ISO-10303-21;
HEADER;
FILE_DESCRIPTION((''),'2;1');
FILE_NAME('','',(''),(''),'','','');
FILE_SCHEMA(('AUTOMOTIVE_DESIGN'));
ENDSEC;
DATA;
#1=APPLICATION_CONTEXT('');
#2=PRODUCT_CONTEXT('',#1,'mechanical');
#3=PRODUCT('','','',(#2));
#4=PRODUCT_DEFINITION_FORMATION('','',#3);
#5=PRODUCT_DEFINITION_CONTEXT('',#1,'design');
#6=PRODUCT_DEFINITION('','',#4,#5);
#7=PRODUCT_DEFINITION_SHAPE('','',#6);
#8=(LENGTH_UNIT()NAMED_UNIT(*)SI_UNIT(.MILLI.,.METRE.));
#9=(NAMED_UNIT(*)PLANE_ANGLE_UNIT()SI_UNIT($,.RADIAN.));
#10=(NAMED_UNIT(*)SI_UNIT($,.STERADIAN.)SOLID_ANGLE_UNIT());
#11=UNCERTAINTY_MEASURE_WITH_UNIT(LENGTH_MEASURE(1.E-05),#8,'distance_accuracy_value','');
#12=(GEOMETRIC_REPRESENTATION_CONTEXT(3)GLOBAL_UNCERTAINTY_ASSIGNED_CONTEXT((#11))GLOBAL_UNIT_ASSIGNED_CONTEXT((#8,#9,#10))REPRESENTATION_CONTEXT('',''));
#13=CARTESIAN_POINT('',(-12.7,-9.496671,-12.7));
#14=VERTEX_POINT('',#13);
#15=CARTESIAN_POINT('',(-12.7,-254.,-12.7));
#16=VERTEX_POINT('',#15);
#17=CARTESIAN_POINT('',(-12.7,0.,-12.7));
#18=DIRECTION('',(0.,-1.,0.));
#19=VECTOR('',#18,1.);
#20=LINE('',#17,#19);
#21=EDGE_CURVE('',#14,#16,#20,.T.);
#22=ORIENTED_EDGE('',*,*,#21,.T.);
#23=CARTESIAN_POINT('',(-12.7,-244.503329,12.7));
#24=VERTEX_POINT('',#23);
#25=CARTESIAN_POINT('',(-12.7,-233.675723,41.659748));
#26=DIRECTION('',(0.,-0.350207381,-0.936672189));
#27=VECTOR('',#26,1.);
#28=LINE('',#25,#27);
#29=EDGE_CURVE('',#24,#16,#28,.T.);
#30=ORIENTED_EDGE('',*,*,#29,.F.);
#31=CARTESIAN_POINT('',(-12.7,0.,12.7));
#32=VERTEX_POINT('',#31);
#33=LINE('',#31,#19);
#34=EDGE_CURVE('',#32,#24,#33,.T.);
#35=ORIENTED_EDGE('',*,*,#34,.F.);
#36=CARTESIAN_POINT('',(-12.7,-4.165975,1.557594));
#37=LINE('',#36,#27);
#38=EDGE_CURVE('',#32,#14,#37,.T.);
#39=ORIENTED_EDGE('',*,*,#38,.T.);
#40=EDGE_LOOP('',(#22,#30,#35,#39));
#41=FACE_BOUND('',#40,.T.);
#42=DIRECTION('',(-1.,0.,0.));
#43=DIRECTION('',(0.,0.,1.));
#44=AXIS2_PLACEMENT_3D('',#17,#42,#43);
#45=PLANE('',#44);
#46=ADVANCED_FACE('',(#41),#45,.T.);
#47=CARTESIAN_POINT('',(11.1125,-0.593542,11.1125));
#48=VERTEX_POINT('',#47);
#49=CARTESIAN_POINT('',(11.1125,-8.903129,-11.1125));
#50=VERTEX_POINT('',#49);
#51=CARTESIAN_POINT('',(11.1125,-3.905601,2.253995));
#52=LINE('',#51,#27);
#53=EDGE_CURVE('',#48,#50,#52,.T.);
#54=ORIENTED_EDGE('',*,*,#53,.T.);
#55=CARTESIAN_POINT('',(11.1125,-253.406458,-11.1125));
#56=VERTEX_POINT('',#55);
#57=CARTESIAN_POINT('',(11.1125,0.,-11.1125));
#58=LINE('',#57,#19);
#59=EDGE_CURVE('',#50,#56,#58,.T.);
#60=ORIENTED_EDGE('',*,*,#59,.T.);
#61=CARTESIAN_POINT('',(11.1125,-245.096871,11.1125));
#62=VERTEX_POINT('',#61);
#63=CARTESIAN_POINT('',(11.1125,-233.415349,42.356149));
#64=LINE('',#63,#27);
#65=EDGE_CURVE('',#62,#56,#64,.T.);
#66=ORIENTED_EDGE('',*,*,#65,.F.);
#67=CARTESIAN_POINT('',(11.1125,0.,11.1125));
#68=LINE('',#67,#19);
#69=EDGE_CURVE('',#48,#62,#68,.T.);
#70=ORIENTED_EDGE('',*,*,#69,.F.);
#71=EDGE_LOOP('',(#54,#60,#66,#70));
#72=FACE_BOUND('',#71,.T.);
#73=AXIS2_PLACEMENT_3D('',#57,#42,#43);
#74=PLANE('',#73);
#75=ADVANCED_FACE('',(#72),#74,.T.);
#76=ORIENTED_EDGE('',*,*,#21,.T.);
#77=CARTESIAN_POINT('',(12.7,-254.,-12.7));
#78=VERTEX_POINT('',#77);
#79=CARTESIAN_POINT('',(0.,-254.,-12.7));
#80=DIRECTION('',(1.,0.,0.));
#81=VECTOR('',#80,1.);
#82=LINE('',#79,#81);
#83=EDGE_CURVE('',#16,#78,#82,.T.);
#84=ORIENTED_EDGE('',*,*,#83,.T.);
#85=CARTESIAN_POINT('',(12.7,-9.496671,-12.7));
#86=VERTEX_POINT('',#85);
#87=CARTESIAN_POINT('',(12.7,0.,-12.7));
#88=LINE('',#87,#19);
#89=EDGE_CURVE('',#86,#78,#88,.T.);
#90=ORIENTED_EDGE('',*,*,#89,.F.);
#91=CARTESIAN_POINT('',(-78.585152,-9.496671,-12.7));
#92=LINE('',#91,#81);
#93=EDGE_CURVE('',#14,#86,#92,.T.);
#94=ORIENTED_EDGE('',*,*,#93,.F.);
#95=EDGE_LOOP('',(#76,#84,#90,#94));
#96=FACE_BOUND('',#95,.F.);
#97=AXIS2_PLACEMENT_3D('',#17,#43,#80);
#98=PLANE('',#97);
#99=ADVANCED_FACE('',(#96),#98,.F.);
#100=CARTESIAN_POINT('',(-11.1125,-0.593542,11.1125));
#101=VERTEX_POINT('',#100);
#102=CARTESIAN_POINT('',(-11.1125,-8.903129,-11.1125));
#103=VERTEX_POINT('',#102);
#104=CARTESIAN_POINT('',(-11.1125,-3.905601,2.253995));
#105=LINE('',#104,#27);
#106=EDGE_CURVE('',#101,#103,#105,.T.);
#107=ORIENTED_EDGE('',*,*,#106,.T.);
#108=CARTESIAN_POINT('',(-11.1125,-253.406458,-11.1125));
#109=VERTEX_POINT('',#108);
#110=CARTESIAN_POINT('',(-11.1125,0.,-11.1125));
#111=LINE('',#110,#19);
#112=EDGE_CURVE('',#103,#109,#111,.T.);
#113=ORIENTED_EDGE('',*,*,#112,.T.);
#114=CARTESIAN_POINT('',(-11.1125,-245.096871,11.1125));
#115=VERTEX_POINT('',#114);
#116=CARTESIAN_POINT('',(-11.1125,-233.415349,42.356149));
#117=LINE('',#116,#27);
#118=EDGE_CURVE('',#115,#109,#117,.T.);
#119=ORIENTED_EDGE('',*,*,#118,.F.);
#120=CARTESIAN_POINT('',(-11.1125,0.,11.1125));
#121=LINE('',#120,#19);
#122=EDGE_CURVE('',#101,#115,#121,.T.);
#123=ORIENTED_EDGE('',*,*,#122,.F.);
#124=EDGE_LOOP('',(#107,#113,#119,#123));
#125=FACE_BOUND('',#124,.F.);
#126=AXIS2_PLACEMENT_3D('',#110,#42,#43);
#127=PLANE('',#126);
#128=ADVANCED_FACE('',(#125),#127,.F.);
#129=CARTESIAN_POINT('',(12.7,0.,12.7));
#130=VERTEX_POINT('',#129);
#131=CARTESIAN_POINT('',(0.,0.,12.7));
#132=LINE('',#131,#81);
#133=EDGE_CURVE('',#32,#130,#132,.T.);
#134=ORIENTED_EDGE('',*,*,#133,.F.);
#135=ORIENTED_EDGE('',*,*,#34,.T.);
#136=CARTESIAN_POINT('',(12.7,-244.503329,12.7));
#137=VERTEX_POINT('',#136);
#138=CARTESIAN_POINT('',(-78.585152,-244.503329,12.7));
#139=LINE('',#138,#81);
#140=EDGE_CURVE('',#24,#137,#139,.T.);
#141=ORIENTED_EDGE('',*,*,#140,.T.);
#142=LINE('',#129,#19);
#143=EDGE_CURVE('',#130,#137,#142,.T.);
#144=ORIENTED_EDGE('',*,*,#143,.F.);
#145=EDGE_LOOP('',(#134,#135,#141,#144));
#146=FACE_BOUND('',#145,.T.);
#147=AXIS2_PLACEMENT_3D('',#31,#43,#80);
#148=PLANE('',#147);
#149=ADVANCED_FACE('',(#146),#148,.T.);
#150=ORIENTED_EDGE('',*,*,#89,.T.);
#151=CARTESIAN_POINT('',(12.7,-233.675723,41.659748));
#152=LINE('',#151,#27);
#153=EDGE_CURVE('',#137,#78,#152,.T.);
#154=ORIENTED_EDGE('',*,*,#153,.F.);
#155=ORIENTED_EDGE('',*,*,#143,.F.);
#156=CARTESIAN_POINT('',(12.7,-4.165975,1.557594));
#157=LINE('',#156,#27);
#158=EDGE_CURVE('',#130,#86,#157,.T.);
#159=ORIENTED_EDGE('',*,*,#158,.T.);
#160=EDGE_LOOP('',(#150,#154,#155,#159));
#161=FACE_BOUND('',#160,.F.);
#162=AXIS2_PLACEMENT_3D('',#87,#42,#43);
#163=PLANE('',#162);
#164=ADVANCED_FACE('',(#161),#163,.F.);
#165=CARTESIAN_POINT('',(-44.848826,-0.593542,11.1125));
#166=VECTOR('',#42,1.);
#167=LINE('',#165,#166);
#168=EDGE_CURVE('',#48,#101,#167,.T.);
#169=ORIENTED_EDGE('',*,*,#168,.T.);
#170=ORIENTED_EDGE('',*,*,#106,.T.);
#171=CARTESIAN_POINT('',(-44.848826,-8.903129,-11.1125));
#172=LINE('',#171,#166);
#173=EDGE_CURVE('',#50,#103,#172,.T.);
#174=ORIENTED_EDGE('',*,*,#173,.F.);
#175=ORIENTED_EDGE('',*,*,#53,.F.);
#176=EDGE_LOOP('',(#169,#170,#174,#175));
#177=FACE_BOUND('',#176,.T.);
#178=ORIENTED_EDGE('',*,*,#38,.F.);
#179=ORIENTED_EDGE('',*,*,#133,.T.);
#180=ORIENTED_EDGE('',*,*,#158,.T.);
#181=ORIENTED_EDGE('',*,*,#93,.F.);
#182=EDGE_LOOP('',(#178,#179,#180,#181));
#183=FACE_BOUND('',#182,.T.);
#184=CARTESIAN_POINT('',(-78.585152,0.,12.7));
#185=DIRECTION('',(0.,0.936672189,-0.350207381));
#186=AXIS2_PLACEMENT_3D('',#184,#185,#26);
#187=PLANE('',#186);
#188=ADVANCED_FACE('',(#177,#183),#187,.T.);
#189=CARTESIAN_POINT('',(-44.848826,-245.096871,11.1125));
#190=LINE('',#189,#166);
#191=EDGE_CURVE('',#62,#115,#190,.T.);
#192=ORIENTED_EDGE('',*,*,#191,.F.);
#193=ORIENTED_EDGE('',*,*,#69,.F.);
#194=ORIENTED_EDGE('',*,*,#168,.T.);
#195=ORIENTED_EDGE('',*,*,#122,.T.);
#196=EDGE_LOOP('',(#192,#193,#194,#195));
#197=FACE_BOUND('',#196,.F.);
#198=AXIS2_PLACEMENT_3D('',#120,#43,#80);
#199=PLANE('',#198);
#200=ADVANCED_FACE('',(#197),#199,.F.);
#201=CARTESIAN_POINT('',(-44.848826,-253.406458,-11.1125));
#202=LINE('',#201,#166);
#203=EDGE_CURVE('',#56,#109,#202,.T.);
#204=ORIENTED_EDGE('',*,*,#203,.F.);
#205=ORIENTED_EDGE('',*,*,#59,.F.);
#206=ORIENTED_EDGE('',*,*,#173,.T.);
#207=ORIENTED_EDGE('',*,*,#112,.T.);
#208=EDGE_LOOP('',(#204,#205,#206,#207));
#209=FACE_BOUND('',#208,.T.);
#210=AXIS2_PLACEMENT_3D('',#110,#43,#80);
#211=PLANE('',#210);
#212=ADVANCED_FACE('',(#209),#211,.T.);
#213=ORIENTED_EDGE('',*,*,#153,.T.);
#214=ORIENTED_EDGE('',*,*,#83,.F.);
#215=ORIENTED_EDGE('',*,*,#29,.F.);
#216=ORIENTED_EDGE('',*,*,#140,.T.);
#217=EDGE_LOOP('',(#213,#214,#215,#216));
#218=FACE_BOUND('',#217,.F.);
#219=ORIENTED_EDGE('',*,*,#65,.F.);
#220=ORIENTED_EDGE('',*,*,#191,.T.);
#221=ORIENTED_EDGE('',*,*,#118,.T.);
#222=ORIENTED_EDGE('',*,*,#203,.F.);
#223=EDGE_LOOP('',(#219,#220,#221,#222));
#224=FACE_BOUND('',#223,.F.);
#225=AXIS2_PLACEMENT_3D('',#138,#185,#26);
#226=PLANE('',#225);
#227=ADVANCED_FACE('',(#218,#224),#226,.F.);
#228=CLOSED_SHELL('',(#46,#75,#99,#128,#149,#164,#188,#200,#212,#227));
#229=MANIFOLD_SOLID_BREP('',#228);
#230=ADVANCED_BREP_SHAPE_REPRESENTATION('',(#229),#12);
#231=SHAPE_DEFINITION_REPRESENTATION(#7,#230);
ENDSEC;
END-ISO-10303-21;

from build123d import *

# Parameters (mm, degrees)
F0_W        = 25.4
F0_H        = 25.4
F0_W_2      = 22.225
F0_H_2      = 22.225
F1_DEPTH    = 254
F2_T1_DEPTH = 157.170304922
F3_T1_DEPTH = 157.170304922


# Not quite as in the source:
# - a fillet or chamfer that OpenCascade refuses, or shapes differently, is made with other operations: its cross-section is extruded or revolved along the edge and cut away or added


with BuildPart() as f1:
    # F0 (on Front) → F1 (new body)
    with BuildSketch(Plane.XZ):
        Rectangle(F0_W, F0_H)
        Rectangle(F0_W_2, F0_H_2, mode=Mode.SUBTRACT)
    extrude(amount=F1_DEPTH)

    # F2: chamfer of 25.4 x 9.4966708589 on 1 edges, made by hand

    # F2_s2 → F2_t1 (cut)
    with BuildSketch(Plane.YZ.offset(-78.585152461)):
        Polygon((-244.5033291411, 12.7), (-254, -12.7), (-254, 12.7), align=None)
    extrude(amount=F2_T1_DEPTH, mode=Mode.SUBTRACT)

    # F3: chamfer of 25.4 x 9.4966708589 on 1 edges, made by hand

    # F3_s2 → F3_t1 (cut)
    with BuildSketch(Plane.YZ.offset(-78.585152461)):
        Polygon((0, 12.7), (-9.4966708589, -12.7), (0, -12.7), align=None)
    extrude(amount=F3_T1_DEPTH, mode=Mode.SUBTRACT)


solid = f1.part
